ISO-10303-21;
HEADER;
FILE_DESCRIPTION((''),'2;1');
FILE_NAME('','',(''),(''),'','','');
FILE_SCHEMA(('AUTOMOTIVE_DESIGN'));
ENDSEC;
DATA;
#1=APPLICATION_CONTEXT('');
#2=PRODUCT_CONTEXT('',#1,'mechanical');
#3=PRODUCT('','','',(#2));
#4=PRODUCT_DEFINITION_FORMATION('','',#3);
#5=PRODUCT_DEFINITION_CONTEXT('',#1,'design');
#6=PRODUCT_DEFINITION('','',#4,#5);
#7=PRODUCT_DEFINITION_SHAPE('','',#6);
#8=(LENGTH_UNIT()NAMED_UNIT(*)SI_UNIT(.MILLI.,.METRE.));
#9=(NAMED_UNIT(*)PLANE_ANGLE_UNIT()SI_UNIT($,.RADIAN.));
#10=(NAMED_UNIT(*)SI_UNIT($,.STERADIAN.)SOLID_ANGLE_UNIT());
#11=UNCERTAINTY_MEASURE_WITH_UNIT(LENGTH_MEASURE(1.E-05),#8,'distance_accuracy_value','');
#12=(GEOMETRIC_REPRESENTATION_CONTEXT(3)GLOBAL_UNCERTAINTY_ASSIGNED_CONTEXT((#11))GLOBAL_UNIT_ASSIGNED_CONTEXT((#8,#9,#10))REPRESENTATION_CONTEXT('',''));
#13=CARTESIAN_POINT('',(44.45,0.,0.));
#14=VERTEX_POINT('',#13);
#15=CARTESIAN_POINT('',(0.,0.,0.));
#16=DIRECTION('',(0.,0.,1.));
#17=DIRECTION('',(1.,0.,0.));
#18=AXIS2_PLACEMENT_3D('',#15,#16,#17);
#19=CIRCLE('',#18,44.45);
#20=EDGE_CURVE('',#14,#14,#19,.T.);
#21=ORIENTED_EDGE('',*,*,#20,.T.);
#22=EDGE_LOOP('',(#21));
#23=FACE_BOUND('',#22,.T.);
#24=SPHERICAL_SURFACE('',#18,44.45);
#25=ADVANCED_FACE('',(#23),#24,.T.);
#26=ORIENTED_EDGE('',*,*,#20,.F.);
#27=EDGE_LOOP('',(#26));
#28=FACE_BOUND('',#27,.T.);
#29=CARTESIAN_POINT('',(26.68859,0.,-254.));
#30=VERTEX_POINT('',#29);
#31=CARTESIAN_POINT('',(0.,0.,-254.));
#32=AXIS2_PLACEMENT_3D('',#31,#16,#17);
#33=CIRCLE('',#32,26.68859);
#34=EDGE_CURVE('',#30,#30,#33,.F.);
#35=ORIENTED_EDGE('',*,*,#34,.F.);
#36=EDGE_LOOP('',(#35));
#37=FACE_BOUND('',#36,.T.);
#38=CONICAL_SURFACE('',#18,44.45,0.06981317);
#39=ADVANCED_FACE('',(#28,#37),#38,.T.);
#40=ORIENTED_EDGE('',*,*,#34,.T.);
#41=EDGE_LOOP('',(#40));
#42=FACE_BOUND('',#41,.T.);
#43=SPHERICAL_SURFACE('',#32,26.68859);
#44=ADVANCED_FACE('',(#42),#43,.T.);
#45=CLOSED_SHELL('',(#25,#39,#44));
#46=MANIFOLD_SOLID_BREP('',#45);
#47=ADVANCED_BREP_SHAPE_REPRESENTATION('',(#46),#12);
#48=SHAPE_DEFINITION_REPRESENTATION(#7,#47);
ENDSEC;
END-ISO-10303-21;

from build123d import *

# Parameters (mm, degrees)
SKETCH1_R           = 44.45
BOSS_EXTRUDE1_DEPTH = 254
BOSS_EXTRUDE1_DRAFT = -4


# Read off the part's stored shape, not the designer's step: Revolve1
with BuildPart() as part:
    # Sketch1 → Boss-Extrude1 (with draft: the straight prism first)
    with BuildSketch(Plane.XY):
        Circle(SKETCH1_R)
    extrude(amount=-BOSS_EXTRUDE1_DEPTH)
    # Boss-Extrude1: the draft: its side faces are tilted about the plane it starts from
    boss_extrude1_sides = [part.faces().sort_by_distance(p)[0] for p in [
        (-44.45, 0, -127),
    ]]
    draft(boss_extrude1_sides, Plane.XY, BOSS_EXTRUDE1_DRAFT)

    # Revolve1 outline → Revolve1 (revolve)
    with BuildSketch(Plane.XZ):
        with BuildLine():
            Line((0, 0), (44.45, -4.4e-08))
            ThreePointArc((44.45, -4.4e-08), (31.430896439, 31.430896408), (0, 44.45))
            Line((0, 44.45), (0, 0))
        make_face()
    revolve(axis=Axis((0, 0, 0), (0, 0, 1)))

    # Sketch5 → Revolve2 (revolve)
    with BuildSketch(Plane(origin=(0, 0, 0), x_dir=(0, 0, -1), z_dir=(1, 0, 0))):
        with BuildLine():
            Line((254, 26.688589766), (254, -26.688589766))
            ThreePointArc((254, -26.688589766), (280.688589766, 0), (254, 26.688589766))
        make_face()
    revolve(axis=Axis((0, 26.688589766, -254), (0, -1, 0)))


solid = part.part
